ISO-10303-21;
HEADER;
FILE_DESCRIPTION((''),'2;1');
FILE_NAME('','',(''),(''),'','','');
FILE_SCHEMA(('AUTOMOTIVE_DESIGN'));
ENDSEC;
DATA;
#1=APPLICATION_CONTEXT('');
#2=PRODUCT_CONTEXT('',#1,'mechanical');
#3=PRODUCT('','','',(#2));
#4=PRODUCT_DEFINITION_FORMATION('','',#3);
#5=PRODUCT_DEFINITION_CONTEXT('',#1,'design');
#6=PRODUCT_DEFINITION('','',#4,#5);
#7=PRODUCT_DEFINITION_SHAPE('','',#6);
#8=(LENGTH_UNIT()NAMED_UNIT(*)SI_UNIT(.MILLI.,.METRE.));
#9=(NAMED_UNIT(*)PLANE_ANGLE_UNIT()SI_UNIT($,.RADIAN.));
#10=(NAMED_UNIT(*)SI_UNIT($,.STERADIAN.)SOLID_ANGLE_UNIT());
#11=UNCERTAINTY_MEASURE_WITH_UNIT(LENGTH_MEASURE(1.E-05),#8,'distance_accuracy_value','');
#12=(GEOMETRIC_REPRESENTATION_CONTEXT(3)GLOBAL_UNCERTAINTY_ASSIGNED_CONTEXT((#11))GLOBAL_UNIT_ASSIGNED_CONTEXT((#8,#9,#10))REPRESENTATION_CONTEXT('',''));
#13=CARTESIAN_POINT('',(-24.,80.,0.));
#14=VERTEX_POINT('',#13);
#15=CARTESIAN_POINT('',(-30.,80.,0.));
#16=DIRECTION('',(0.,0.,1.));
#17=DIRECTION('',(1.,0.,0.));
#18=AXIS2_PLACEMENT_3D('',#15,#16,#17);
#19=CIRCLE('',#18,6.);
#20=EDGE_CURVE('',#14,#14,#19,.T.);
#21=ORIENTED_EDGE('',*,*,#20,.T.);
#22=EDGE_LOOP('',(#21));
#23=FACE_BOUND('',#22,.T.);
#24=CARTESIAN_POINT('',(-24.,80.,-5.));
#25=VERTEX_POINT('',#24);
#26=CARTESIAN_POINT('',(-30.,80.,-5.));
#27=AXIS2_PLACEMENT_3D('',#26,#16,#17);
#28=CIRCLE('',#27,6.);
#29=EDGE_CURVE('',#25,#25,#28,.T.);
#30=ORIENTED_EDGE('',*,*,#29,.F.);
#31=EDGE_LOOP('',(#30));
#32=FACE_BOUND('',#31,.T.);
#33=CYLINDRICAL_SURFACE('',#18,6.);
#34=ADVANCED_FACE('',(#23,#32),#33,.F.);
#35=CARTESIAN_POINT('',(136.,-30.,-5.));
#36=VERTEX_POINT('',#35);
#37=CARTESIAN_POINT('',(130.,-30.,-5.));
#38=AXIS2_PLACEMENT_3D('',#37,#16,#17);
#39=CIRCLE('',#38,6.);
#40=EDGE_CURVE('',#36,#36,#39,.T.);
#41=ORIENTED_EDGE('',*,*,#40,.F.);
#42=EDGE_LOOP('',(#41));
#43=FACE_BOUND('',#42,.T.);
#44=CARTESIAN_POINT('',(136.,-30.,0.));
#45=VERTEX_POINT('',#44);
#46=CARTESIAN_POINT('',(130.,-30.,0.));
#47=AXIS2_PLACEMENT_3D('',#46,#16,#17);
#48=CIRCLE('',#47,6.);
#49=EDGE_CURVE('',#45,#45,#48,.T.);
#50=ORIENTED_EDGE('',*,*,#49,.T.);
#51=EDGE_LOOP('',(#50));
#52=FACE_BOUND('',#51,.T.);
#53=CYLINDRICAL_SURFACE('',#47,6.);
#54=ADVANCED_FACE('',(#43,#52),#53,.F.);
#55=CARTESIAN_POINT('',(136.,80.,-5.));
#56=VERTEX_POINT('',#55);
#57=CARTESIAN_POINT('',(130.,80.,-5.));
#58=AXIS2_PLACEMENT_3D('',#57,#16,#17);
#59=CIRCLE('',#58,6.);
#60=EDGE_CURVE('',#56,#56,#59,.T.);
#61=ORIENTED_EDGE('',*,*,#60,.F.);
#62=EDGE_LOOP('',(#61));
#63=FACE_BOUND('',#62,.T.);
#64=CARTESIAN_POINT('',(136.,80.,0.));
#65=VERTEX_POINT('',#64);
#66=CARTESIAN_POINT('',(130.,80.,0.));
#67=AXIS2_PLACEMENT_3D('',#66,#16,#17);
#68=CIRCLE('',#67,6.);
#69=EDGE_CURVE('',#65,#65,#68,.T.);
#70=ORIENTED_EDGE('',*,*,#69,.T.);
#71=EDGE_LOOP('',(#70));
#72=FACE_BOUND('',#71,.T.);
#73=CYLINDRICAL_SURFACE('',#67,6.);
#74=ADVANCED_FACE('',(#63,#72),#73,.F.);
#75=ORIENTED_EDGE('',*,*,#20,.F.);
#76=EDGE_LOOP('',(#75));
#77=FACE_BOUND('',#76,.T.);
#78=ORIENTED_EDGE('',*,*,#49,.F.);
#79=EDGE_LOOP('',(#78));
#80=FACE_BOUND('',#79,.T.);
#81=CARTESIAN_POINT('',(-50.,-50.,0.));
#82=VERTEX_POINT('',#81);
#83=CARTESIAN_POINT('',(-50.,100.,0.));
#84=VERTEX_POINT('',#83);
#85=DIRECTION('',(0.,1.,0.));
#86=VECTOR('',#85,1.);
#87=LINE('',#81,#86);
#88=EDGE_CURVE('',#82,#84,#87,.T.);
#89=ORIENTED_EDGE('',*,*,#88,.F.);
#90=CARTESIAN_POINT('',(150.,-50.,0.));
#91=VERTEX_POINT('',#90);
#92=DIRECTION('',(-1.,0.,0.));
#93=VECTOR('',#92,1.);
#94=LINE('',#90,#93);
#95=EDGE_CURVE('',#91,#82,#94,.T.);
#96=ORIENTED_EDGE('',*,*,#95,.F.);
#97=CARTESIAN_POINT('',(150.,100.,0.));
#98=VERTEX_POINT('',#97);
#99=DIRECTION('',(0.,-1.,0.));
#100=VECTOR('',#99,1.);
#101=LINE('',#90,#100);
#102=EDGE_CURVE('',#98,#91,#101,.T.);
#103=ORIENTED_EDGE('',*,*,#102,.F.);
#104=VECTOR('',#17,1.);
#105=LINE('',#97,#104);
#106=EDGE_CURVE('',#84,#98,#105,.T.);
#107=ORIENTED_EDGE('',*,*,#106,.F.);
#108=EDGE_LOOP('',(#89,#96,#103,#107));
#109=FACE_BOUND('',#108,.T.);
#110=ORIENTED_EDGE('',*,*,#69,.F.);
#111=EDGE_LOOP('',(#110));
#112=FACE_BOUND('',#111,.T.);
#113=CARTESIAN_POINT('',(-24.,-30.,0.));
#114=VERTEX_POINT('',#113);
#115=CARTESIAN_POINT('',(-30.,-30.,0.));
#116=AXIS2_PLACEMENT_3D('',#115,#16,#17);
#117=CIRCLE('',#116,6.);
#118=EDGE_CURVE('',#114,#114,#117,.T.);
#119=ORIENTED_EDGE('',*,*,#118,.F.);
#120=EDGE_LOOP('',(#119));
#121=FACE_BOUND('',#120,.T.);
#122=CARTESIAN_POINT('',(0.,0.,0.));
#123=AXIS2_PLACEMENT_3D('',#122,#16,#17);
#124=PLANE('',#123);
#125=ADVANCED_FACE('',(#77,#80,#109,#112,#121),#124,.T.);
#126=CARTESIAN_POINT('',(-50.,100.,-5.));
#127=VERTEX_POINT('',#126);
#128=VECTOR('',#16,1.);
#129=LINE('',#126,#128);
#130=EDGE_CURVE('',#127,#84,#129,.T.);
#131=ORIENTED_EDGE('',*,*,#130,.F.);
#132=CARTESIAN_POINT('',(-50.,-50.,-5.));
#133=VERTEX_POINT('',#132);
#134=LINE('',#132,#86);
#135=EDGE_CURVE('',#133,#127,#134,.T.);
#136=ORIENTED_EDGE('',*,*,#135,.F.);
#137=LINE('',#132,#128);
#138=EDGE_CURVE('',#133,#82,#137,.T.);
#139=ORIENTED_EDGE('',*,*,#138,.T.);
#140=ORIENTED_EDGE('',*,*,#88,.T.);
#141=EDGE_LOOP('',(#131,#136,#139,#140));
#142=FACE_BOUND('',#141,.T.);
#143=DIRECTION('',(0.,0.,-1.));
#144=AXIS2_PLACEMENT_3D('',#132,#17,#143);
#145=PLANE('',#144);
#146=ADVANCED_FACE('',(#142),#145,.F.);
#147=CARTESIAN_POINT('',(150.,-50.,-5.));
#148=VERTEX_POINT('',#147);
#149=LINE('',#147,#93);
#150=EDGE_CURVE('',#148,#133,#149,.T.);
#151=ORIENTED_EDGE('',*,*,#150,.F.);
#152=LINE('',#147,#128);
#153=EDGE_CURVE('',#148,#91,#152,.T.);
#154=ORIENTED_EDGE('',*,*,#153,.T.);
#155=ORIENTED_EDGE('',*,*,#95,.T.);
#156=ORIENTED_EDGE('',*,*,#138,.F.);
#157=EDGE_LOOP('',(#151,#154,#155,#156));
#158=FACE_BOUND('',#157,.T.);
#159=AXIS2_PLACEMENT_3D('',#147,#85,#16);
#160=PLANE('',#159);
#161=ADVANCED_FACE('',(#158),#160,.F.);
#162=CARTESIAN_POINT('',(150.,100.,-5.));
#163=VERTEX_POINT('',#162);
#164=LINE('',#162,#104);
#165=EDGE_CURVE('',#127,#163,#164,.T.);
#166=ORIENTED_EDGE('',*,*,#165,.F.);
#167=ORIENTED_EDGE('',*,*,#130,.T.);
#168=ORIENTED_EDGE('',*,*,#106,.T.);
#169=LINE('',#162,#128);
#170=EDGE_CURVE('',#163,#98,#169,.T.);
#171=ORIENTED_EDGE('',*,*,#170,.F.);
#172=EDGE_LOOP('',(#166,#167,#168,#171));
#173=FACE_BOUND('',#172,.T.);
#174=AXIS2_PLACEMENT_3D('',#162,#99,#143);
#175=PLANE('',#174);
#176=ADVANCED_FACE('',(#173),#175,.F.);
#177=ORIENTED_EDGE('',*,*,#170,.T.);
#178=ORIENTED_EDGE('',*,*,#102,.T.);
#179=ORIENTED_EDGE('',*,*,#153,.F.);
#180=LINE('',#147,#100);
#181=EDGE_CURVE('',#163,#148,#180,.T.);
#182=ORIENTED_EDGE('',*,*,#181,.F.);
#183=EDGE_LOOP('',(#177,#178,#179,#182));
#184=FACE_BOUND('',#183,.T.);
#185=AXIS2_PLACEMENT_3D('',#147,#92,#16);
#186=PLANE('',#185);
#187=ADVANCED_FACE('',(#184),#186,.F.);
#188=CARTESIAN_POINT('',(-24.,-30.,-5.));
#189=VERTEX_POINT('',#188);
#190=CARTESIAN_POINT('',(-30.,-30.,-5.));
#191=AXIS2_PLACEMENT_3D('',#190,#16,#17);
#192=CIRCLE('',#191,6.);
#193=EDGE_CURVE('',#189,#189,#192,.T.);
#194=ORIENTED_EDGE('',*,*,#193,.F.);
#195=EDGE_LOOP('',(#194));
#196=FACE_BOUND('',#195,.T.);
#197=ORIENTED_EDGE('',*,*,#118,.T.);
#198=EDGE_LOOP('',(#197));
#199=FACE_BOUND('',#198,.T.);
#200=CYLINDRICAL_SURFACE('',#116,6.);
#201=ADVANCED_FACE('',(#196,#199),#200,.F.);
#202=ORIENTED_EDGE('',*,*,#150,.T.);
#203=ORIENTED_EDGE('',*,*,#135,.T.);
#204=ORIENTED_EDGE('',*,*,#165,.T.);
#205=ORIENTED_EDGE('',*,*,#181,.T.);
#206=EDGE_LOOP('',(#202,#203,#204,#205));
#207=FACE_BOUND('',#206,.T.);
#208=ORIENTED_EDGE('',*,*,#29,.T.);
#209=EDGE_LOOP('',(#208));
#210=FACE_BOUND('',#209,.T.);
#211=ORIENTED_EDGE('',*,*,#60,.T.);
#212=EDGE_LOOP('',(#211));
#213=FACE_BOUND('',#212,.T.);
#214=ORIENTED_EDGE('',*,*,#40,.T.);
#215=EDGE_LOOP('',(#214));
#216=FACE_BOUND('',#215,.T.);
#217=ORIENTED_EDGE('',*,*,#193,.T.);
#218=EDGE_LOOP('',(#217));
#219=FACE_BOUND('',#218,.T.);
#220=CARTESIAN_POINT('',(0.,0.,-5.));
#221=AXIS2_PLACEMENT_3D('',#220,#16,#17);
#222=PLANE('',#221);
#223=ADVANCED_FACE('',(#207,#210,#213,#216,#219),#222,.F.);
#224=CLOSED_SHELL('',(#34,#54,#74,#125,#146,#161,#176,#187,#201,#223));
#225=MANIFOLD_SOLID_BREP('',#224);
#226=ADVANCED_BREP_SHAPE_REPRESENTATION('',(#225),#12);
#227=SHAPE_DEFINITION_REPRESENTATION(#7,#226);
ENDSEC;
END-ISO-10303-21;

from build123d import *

# Parameters (mm, degrees)
STOCK_POST_1_START     = -5
STOCK_POST_1_OUTLINE_W = 200
STOCK_POST_1_OUTLINE_H = 150
STOCK_POST_1_DEPTH     = 5
F_12_0MM_DOWEL_HOLE1_D = 12


# Read off the part's stored shape, not the designer's step: Stock-Post-1
with BuildPart() as part:
    # Stock-Post-1 outline → Stock-Post-1 (new body)
    with BuildSketch(Plane.XY.offset(STOCK_POST_1_START)):
        with Locations((50, 25)):
            Rectangle(STOCK_POST_1_OUTLINE_W, STOCK_POST_1_OUTLINE_H)
    extrude(amount=STOCK_POST_1_DEPTH)

    # Ø12.0mm Dowel Hole1 (through all)
    with Locations(Plane.XY):
        with Locations((-30, -30), (-30, 80), (130, 80), (130, -30)):
            Hole(F_12_0MM_DOWEL_HOLE1_D / 2)


solid = part.part
